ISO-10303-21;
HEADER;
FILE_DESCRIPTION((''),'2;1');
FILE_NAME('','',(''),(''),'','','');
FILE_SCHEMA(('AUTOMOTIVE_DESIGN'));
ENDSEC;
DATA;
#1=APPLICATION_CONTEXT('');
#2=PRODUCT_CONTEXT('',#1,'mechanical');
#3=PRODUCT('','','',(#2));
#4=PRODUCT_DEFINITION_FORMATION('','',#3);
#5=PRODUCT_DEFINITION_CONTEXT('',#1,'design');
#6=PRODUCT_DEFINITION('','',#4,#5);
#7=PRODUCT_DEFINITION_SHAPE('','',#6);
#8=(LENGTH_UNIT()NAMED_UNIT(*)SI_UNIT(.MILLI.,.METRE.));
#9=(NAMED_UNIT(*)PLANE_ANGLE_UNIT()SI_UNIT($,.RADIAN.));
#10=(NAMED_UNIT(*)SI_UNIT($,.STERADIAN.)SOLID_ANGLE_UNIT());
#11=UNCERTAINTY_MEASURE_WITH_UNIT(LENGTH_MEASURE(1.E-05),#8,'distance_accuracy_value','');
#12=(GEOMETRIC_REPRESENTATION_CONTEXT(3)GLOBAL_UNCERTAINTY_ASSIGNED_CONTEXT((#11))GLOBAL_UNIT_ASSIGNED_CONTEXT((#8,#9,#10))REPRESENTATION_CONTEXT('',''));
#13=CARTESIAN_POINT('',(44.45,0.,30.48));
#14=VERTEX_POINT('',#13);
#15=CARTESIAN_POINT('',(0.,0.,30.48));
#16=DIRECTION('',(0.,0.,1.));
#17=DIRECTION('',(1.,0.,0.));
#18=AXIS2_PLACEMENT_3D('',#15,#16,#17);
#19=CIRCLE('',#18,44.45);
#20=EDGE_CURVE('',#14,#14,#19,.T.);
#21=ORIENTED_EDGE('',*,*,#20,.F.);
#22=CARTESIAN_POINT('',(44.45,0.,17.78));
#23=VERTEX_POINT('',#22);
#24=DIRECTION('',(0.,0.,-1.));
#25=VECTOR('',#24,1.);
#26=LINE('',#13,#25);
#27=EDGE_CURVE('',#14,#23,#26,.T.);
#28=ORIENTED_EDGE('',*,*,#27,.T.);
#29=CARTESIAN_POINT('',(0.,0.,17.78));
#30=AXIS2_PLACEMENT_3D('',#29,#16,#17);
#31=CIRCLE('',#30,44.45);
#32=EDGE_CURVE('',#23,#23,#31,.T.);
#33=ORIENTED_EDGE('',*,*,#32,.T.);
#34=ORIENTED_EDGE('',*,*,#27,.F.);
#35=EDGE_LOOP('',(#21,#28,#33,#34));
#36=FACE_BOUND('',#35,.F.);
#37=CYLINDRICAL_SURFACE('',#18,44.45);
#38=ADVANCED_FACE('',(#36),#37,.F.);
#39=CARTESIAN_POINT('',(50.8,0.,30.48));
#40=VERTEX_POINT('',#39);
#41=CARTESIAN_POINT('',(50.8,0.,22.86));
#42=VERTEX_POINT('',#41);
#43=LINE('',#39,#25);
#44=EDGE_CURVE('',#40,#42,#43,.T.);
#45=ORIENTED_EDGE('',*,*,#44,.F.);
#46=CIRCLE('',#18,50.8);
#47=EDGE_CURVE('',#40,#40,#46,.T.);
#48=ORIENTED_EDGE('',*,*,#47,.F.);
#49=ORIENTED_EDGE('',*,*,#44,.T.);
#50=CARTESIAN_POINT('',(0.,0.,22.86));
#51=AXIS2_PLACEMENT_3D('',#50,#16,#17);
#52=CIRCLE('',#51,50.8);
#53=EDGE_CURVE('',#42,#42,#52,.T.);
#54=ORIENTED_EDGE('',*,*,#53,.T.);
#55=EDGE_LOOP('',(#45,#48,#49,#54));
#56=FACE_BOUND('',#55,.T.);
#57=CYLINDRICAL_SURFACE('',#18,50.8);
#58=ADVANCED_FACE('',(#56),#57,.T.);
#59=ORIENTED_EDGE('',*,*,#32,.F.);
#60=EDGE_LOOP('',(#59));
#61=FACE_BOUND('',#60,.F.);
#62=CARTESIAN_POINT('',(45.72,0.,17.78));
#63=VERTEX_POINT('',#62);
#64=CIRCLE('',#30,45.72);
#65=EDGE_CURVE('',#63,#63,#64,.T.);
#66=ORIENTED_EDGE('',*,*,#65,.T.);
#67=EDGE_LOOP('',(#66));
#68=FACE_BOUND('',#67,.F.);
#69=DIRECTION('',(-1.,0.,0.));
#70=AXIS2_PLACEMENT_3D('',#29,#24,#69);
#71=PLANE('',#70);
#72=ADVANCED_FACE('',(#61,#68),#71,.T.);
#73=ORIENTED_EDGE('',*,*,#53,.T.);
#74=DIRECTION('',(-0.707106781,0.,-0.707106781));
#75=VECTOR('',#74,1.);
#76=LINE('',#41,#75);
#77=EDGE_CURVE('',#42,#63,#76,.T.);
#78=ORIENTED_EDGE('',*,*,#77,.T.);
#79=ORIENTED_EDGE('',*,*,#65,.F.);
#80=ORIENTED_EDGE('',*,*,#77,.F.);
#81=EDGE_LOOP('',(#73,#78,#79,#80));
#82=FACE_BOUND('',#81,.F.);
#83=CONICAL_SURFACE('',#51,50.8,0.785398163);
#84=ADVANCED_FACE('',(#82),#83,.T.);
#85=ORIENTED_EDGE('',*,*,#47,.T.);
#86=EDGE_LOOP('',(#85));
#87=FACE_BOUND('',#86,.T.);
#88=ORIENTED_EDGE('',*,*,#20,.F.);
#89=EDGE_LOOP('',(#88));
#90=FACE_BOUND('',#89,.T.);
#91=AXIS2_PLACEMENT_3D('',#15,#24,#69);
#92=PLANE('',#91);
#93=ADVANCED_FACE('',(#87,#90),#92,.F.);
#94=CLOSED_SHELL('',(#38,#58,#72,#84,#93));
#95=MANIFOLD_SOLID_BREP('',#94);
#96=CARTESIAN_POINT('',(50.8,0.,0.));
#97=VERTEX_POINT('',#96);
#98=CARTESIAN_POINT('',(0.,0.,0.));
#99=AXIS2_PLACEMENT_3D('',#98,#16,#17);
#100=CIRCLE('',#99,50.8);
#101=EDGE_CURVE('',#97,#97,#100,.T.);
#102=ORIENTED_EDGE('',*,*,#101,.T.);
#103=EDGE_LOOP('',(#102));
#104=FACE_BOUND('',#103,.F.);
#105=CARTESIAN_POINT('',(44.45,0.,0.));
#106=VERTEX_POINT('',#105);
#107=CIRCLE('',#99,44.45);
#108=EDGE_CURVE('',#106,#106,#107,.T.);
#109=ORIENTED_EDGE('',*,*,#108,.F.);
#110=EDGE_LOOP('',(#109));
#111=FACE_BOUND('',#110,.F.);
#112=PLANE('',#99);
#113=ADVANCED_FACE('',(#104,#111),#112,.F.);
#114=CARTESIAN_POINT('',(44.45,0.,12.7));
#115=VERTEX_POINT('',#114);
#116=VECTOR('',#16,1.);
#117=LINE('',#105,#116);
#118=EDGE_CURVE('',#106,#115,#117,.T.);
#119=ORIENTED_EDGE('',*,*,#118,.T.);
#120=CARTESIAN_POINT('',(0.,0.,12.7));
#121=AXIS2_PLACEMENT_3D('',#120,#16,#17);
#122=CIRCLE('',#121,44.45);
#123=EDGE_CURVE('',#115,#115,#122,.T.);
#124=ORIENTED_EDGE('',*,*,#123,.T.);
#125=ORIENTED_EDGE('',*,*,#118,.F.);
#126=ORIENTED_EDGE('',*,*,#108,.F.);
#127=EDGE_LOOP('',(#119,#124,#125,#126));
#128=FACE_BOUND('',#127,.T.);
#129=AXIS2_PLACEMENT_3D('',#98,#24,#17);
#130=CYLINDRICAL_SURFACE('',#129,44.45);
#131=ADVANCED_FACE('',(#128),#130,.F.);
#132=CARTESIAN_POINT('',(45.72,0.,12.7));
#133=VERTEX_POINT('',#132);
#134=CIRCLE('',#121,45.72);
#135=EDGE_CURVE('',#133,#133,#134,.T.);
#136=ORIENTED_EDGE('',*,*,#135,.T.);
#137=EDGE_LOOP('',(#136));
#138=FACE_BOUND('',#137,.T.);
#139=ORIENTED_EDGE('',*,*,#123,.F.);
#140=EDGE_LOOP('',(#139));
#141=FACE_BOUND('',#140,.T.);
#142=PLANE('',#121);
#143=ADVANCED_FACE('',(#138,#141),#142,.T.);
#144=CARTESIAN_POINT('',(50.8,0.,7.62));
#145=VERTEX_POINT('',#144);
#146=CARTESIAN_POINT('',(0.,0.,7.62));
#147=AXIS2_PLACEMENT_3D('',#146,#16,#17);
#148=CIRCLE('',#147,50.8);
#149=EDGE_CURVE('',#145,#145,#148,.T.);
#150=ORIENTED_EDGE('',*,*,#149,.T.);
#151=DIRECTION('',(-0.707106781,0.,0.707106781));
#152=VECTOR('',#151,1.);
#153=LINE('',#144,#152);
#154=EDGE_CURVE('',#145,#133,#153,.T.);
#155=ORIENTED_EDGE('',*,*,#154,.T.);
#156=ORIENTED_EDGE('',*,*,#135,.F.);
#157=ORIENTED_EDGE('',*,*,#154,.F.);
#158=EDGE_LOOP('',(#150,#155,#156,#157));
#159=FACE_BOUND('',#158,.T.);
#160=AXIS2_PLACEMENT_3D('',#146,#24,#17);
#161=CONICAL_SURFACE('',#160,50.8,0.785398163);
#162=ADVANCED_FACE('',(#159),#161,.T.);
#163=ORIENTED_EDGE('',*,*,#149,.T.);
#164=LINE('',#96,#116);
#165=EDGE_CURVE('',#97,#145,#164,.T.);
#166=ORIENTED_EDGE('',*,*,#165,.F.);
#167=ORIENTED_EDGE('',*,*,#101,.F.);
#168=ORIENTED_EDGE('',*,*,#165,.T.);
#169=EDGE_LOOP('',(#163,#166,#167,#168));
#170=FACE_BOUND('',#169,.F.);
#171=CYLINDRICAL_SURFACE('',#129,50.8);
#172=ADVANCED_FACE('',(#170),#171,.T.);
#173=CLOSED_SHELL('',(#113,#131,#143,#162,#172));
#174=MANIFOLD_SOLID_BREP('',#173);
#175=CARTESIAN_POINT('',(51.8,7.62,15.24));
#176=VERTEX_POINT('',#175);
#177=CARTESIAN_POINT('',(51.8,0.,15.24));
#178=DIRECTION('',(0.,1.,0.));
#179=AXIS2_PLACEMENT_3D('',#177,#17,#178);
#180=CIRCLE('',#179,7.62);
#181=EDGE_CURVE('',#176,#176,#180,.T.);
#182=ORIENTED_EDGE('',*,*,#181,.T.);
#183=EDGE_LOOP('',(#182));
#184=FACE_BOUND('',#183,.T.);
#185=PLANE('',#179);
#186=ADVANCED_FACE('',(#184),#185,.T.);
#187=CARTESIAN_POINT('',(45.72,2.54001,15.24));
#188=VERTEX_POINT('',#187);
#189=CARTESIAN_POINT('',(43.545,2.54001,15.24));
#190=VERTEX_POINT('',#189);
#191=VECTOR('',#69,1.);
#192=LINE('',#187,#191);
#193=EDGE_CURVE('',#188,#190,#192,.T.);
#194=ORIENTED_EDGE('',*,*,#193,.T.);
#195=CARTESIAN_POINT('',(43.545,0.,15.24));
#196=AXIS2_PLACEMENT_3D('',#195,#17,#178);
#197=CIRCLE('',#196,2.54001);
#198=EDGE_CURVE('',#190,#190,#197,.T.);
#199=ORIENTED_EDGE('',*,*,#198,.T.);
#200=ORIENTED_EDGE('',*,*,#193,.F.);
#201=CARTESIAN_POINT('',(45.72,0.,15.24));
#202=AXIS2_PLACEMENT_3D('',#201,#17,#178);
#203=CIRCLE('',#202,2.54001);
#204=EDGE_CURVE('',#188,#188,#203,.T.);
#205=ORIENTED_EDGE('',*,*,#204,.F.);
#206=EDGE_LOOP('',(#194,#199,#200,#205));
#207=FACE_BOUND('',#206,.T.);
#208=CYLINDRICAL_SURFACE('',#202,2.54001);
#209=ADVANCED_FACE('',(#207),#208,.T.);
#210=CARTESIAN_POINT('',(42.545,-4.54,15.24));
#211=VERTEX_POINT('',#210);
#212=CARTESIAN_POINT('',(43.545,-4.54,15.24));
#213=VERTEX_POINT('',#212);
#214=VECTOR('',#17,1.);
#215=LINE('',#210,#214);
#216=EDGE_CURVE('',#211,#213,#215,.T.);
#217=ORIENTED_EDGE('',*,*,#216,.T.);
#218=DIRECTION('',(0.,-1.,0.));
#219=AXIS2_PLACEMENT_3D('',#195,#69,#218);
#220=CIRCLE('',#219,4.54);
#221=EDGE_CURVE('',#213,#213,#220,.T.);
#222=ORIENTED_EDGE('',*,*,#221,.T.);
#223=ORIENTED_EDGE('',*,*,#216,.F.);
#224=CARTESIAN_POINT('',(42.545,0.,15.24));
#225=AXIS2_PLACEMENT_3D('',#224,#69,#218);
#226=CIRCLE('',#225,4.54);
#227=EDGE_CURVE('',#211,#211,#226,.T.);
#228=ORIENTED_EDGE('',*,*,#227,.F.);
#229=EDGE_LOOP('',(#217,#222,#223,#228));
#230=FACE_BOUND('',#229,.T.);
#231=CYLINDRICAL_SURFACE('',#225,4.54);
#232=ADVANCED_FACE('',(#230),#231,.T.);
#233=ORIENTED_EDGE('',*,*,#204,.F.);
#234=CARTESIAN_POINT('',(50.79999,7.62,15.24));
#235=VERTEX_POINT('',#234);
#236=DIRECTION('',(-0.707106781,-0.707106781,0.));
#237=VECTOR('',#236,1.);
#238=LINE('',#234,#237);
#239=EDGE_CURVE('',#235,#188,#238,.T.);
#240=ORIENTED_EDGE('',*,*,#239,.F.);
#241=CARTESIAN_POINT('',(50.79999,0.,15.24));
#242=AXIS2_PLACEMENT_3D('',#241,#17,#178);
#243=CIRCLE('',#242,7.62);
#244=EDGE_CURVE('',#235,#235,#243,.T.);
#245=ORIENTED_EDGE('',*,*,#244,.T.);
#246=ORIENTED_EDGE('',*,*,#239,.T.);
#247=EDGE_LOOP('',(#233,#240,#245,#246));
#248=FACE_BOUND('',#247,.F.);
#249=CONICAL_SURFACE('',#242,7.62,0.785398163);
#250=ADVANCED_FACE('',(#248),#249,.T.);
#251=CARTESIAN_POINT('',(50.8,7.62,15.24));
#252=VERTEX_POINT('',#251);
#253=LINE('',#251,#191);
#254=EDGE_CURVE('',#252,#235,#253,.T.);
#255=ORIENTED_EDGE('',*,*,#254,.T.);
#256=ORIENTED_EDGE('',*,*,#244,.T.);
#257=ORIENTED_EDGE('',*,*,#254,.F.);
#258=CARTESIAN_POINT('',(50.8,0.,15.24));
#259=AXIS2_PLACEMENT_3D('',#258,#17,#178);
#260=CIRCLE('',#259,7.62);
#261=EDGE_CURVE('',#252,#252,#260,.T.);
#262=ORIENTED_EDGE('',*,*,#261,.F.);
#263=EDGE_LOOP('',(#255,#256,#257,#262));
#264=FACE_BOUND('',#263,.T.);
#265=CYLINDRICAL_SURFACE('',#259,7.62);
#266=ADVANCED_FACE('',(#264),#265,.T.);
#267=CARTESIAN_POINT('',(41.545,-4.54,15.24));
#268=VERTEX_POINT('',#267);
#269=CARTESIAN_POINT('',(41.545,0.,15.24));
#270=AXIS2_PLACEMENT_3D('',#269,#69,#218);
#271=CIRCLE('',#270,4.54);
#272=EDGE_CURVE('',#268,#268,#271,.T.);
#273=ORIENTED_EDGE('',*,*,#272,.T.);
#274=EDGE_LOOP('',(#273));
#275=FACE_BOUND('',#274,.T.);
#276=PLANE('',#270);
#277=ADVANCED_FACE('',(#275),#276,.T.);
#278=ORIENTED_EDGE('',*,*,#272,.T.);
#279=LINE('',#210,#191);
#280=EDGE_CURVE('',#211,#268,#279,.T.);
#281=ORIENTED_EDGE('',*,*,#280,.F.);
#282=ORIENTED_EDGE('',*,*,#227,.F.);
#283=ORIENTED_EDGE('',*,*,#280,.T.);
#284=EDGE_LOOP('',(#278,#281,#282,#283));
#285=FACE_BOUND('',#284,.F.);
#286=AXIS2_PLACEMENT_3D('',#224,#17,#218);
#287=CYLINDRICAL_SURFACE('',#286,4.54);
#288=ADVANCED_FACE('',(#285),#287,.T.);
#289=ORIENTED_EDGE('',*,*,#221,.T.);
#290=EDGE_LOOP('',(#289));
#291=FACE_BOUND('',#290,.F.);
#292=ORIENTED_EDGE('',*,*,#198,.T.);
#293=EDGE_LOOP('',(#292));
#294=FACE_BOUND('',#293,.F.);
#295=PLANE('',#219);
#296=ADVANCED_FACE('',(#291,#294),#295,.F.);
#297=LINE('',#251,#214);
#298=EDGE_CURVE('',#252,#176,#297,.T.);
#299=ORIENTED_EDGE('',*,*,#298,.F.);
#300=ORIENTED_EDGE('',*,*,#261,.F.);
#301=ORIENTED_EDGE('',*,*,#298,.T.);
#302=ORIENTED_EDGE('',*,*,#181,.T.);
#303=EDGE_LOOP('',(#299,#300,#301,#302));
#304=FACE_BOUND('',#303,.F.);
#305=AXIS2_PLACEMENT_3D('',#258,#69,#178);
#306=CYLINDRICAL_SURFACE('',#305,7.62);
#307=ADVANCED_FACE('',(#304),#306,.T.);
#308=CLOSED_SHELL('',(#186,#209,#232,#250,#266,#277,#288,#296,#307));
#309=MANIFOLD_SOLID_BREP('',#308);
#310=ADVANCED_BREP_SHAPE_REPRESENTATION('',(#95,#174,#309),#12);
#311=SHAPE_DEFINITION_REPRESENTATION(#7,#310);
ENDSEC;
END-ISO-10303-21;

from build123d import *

# Parameters (mm, degrees)
F0_R      = 50.8
F0_R_2    = 44.45
F1_DEPTH  = 12.7
F2_SIZE   = 5.08
F4_R      = 7.62
F5_DEPTH  = 5.08
F6_SIZE   = 5.07999
F7_DEPTH  = 3.175
F10_R     = 4.54
F10_R_2   = 2.54
F11_DEPTH = 1
F12_DEPTH = 1
F13_DEPTH = 1


# Not quite as in the source:
# - a fillet or chamfer is up to 0.001 mm smaller than in the source, because OpenCascade refuses the exact size


with BuildPart() as f1:
    # F0 (on Top) → F1 (new body)
    with BuildSketch(Plane.XY):
        Circle(F0_R)
        Circle(F0_R_2, mode=Mode.SUBTRACT)
    extrude(amount=F1_DEPTH)

    # F2
    f2_edges = [f1.edges().sort_by_distance(p)[0] for p in [
        (-50.8, 0, 12.7),
    ]]
    chamfer(f2_edges, length=F2_SIZE)


with BuildPart() as f5:
    # F4 (on offset) → F5 (new body)
    with BuildSketch(Plane.YZ.offset(50.8)):
        with Locations((0, 15.24)):
            Circle(F4_R)
    extrude(amount=-F5_DEPTH)

    # F6 (size 5.08 in the source; OpenCascade refuses exactly that, so slightly less here)
    f6_edges = [f5.edges().sort_by_distance(p)[0] for p in [
        (45.72, -7.62, 15.24),
    ]]
    chamfer(f6_edges, length=F6_SIZE)

    # F7 (add): a face of the model
    f7_faces = [f5.faces().sort_by_distance(p)[0] for p in [
        (45.72, 0, 15.24),
    ]]
    extrude(f7_faces, amount=F7_DEPTH)

    # F10 (on face) → F11 (join)
    with BuildSketch(Plane(origin=(42.545, 0, 0), x_dir=(0, -1, 0), z_dir=(-1, 0, 0))):
        with Locations((0, 15.24)):
            Circle(F10_R)
        with Locations((0, 15.24)):
            Circle(F10_R_2, mode=Mode.SUBTRACT)
    extrude(amount=-F11_DEPTH)

    # F12 (add): a face of the model
    f12_faces = [f5.faces().sort_by_distance(p)[0] for p in [
        (42.545, 0, 15.24),
    ]]
    extrude(f12_faces, amount=F12_DEPTH)

    # F13 (add): a face of the model
    f13_faces = [f5.faces().sort_by_distance(p)[0] for p in [
        (50.8, 0, 15.24),
    ]]
    extrude(f13_faces, amount=F13_DEPTH)


with BuildPart() as f9_1:
    # F9: instance of F1
    add(f1.part.mirror(Plane.XY.offset(15.24)))


solid = Compound([f1.part, f5.part, f9_1.part])
